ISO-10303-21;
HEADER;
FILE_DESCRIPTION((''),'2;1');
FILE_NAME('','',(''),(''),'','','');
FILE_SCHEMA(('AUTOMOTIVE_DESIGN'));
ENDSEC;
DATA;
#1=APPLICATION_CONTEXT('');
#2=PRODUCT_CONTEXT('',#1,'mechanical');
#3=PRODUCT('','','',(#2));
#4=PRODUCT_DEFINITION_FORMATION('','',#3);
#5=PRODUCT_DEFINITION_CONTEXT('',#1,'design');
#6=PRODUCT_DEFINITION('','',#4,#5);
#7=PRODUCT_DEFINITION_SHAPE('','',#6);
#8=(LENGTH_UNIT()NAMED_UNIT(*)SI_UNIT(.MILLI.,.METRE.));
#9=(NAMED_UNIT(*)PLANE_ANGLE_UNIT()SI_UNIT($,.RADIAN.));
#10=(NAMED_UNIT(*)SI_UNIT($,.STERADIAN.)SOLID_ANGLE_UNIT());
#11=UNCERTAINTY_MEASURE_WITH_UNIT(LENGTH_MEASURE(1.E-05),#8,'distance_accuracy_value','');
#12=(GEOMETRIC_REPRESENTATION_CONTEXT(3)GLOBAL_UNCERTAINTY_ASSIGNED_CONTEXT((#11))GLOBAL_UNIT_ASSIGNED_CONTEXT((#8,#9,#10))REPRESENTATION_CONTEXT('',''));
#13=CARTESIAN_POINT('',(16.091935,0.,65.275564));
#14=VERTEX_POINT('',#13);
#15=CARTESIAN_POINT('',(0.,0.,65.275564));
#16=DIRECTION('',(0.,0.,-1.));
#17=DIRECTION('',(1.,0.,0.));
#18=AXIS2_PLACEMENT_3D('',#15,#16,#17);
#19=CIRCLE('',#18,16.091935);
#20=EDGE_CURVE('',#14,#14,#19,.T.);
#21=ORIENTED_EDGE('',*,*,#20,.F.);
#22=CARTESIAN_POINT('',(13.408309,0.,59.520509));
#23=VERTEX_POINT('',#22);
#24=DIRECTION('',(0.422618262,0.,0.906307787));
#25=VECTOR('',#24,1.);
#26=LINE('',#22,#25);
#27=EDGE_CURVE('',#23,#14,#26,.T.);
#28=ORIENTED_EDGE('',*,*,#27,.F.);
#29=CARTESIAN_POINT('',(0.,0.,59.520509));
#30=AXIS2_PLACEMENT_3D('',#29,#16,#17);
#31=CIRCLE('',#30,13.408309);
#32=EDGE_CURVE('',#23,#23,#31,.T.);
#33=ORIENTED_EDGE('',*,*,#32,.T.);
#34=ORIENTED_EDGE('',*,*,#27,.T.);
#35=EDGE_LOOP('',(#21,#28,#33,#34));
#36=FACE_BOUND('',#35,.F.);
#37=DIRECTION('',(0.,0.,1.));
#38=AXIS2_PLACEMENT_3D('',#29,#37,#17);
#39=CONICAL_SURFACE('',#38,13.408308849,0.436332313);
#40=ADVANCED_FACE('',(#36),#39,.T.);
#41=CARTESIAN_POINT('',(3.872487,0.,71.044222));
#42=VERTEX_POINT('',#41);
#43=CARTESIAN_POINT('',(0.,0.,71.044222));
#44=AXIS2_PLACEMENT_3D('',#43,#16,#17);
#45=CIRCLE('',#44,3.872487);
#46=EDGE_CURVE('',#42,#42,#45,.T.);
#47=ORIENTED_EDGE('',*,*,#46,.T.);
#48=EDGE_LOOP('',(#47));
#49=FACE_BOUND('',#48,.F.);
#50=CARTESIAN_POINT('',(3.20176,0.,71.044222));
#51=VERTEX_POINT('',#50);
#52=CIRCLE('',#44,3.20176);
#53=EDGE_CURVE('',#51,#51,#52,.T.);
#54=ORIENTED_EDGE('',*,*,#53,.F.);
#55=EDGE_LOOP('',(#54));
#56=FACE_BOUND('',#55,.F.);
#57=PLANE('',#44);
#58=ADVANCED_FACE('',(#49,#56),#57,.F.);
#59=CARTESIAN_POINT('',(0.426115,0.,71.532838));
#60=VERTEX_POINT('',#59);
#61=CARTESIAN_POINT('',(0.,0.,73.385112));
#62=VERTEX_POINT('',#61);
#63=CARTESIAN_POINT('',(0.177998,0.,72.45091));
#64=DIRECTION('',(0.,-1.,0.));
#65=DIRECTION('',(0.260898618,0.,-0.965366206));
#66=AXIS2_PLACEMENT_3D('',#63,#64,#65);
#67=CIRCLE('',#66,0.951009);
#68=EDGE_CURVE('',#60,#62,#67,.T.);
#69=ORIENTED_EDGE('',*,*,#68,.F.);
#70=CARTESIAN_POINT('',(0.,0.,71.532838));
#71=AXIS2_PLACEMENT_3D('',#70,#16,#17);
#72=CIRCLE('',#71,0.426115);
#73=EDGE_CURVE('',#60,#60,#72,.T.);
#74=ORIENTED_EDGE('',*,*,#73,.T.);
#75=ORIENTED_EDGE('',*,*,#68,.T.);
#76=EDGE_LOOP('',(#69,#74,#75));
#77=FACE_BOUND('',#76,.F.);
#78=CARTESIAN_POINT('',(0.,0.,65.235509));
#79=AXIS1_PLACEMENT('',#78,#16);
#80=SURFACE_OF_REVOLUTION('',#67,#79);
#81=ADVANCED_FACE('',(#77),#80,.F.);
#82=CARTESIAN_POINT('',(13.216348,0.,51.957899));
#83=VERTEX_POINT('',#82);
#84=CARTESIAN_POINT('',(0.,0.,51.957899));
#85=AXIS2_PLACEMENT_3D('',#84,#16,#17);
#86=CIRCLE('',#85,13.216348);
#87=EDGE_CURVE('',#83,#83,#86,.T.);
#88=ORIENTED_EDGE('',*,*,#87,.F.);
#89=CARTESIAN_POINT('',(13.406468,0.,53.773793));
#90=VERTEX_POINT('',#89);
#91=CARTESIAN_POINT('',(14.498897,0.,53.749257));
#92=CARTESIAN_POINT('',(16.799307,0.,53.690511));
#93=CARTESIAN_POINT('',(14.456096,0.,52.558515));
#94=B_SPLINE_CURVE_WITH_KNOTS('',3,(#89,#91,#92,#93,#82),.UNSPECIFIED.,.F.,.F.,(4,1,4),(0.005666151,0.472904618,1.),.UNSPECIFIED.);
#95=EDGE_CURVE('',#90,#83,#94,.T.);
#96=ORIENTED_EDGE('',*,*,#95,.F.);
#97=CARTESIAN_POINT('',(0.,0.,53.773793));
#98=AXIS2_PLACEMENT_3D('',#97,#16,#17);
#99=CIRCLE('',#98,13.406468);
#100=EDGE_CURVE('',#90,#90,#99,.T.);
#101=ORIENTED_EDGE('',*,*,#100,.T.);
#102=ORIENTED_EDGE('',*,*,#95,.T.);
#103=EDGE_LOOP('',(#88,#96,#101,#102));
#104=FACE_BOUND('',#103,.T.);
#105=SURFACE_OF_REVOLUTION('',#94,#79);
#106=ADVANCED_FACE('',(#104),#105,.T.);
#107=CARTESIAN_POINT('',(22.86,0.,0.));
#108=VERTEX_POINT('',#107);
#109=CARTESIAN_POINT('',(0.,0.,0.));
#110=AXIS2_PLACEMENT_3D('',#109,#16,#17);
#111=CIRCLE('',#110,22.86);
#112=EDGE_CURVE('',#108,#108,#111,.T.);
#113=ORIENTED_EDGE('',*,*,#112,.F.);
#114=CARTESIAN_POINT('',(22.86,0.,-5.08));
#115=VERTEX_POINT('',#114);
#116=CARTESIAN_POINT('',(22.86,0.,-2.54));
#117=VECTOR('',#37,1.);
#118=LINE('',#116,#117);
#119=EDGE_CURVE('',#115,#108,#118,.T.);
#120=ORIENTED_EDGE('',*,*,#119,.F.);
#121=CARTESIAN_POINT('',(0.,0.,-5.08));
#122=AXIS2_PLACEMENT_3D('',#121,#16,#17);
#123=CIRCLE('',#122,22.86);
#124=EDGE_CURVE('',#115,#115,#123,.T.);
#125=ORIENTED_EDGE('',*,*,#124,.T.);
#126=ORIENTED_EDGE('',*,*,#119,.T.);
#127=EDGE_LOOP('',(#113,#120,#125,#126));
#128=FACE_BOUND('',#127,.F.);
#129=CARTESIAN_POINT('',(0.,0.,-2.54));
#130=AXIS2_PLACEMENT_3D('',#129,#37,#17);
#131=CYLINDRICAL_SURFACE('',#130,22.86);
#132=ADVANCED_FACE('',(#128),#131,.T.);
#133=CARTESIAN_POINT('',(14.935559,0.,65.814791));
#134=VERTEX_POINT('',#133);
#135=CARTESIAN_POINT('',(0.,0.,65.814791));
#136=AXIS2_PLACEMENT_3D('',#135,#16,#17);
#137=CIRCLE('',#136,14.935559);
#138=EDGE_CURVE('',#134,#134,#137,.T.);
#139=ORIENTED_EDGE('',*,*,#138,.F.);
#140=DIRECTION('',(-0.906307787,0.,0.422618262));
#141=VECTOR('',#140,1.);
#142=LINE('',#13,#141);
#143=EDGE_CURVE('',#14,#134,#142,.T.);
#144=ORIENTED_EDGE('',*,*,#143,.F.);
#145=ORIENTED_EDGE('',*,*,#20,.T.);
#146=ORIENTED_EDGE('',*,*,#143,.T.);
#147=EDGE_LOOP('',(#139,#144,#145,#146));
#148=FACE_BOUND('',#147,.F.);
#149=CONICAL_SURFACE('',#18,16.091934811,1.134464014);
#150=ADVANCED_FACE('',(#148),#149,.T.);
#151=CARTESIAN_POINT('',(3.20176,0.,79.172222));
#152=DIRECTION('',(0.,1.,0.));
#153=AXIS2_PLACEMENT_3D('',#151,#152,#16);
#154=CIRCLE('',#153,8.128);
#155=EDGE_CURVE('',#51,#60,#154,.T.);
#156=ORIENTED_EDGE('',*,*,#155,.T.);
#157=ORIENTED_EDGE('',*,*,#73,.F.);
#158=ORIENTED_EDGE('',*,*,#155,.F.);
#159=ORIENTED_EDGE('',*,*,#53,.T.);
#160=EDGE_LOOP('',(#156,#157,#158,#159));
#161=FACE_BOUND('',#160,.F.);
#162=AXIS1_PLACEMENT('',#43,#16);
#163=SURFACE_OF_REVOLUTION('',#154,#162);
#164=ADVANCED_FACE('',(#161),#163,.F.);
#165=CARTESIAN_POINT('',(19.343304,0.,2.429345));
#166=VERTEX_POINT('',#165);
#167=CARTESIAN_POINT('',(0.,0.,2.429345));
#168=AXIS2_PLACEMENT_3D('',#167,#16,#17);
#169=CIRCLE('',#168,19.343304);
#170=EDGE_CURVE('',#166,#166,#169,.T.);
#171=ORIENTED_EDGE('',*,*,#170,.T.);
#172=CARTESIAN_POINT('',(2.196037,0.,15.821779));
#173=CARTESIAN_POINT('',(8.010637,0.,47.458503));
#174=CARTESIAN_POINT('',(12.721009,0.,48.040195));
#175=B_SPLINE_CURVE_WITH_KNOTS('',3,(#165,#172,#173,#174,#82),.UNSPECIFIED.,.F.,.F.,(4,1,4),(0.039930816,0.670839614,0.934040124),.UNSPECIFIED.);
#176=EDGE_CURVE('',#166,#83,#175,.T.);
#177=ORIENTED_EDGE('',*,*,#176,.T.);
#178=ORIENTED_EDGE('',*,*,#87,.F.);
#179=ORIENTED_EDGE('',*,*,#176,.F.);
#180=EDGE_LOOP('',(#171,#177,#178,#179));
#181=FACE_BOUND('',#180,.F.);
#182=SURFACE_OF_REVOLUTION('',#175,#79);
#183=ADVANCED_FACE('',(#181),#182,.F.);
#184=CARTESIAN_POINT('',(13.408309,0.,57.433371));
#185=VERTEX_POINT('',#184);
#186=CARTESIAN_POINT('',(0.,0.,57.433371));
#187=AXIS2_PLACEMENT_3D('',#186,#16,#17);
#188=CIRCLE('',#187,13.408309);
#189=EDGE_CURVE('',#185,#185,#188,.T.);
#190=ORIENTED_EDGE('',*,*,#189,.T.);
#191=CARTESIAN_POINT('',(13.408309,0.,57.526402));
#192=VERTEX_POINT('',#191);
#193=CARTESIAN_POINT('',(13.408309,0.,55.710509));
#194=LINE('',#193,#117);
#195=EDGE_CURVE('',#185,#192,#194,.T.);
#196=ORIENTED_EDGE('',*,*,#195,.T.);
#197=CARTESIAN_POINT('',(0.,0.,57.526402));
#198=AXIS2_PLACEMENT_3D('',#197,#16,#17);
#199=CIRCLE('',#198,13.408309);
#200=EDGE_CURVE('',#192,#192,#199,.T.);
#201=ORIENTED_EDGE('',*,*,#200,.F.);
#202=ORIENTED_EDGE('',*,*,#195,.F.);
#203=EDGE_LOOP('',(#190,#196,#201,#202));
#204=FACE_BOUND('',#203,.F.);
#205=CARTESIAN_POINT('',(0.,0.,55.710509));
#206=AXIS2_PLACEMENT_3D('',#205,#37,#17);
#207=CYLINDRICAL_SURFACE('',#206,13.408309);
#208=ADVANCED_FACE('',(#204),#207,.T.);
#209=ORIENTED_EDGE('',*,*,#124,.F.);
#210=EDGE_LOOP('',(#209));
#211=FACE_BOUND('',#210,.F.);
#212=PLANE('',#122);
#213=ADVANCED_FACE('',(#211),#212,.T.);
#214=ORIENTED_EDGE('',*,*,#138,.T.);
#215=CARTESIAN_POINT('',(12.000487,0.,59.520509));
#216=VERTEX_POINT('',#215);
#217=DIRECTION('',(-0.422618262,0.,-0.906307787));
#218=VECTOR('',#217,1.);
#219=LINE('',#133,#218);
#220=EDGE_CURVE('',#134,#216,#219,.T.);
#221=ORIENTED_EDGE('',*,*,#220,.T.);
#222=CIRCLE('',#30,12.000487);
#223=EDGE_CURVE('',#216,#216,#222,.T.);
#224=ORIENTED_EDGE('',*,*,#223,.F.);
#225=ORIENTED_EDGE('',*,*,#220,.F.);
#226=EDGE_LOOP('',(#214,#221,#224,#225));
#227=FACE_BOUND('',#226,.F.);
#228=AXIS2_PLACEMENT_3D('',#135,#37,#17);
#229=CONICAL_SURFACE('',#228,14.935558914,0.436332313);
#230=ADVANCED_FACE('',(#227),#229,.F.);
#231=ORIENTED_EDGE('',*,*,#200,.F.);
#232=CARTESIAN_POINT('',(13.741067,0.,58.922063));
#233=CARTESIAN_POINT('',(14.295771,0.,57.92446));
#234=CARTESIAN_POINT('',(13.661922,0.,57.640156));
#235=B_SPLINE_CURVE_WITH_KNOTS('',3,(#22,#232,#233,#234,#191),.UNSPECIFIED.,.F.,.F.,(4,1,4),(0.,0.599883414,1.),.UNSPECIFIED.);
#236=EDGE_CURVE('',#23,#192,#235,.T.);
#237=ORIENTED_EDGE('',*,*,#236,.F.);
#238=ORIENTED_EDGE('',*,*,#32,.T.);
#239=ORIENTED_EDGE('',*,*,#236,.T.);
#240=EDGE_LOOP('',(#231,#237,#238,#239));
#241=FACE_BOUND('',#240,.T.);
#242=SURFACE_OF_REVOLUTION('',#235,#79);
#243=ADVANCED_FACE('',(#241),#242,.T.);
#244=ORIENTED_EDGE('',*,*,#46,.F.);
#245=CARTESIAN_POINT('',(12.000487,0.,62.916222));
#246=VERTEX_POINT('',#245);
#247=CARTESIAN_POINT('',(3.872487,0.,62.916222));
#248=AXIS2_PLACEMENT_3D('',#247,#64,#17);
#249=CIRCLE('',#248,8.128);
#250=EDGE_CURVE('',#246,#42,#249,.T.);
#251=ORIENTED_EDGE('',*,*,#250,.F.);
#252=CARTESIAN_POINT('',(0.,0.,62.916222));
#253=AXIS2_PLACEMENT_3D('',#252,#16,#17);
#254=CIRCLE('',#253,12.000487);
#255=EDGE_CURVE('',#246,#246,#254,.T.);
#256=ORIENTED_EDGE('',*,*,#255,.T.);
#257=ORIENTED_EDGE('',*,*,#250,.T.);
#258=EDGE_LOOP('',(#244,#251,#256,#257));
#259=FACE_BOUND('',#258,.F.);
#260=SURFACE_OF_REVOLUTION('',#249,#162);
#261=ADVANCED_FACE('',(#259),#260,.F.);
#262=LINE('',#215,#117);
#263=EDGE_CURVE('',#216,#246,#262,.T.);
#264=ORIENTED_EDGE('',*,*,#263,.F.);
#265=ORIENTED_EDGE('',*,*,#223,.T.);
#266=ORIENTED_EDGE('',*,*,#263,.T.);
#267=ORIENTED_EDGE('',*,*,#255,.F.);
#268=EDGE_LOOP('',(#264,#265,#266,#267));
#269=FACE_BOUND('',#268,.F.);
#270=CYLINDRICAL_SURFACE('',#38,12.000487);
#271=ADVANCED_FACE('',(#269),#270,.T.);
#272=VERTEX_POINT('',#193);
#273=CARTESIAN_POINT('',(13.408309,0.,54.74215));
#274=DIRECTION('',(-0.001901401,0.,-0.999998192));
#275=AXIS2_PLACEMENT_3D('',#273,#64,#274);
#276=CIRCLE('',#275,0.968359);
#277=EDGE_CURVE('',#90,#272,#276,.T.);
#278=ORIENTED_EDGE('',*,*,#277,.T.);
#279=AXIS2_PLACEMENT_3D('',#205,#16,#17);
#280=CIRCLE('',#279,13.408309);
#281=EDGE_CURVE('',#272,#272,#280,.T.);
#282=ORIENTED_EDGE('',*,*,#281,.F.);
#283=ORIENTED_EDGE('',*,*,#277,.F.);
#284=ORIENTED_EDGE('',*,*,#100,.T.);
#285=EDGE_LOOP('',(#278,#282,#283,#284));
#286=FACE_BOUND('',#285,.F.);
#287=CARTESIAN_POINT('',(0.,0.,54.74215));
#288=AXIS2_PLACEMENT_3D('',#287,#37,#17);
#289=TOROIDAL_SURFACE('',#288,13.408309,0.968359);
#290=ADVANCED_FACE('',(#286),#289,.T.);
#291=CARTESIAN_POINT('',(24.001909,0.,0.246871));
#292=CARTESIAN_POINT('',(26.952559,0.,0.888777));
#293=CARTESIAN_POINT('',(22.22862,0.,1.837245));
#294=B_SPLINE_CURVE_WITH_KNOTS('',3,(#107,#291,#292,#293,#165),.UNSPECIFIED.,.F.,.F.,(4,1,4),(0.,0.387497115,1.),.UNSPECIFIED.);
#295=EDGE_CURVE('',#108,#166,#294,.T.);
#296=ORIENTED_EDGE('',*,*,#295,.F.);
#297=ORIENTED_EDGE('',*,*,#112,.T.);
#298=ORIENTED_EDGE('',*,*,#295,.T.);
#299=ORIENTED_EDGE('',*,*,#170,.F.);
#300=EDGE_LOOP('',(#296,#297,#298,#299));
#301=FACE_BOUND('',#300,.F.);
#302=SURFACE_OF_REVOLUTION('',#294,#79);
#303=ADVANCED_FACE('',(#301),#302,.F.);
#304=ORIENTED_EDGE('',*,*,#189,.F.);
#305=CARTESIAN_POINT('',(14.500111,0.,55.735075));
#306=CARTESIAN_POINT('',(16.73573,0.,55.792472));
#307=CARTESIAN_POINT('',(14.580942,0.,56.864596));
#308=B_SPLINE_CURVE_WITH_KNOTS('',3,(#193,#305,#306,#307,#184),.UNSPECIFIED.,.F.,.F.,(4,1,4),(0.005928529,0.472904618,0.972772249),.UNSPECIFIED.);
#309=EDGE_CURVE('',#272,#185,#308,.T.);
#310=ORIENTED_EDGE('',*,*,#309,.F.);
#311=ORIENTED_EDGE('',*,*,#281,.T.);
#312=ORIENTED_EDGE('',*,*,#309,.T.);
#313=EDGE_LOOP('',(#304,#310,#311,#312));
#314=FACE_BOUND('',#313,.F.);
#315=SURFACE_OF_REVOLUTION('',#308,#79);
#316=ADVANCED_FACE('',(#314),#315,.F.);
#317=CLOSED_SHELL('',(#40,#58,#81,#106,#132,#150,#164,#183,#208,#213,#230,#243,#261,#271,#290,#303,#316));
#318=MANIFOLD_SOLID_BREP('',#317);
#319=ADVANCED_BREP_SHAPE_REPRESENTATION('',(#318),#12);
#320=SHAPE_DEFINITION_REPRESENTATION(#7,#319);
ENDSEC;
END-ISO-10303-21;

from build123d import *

# Parameters (mm, degrees)
F0_W = 22.86
F0_H = 5.08


# Not quite as in the source:
# - a fillet or chamfer that OpenCascade refuses, or shapes differently, is made with other operations: its cross-section is extruded or revolved along the edge and cut away or added
# - ends of sketch curves that miss each other by under 0.0002 mm in the source are joined


with BuildPart() as f1:
    # F0 (on Front) → F1 (revolve)
    with BuildSketch(Plane.XZ):
        with BuildLine():
            Line((0, 55.7105094194), (0, 0))
            Line((0, 0), (22.86, 0))
            add(Edge.make_bspline(
                [(22.86, 0), (21.5989604618, 0.7698820082), (20.4285707435, 1.5817251932), (19.3433039435, 2.4293450133)],
                knots=[0, 0, 0, 0, 0.0399308158, 0.0399308158, 0.0399308158, 0.0399308158], degree=3))
            add(Edge.make_bspline(
                [(19.3433039435, 2.4293450133), (2.1960366332, 15.8217786838), (8.0106373207, 47.4585030975), (12.7210086452, 48.040195095), (13.216347906, 51.9578989549)],
                knots=[0.0399308158, 0.0399308158, 0.0399308158, 0.0399308158, 0.6708396138, 0.9340401236, 0.9340401236, 0.9340401236, 0.9340401236], degree=3))
            add(Edge.make_bspline(
                [(13.216347906, 51.9578989549), (13.2835273481, 52.4892300656), (13.3343132727, 53.0894723366), (13.3667210402, 53.7746848436)],
                knots=[0.9340401236, 0.9340401236, 0.9340401236, 0.9340401236, 0.9697361905, 0.9697361905, 0.9697361905, 0.9697361905], degree=3))
            add(Edge.make_bspline(
                [(13.3667210402, 53.7746848436), (13.3941969664, 54.3556211357), (13.4084627224, 54.9976338064), (13.4083088487, 55.7105094194)],
                knots=[0.9697361905, 0.9697361905, 0.9697361905, 0.9697361905, 1, 1, 1, 1], degree=3))
            Line((13.4083088487, 55.7105094194), (0, 55.7105094194))
        make_face()
        with Locations((11.43, -2.54)):
            Rectangle(F0_W, F0_H)
        with BuildLine():
            add(Edge.make_bspline(
                [(22.86, 0), (21.5989604618, 0.7698820082), (20.4285707435, 1.5817251932), (19.3433039435, 2.4293450133)],
                knots=[0, 0, 0, 0, 0.0399308158, 0.0399308158, 0.0399308158, 0.0399308158], degree=3))
            add(Edge.make_bspline(
                [(22.86, 0), (24.0019086341, 0.246870981), (26.952558916, 0.8887774552), (22.2286200965, 1.8372453111), (19.3433039435, 2.4293450133)],
                knots=[0, 0, 0, 0, 0.3874971146, 1, 1, 1, 1], degree=3))
        make_face()
        Polygon((0, 59.5205094194), (0, 55.7105094194), (13.4083088487, 55.7105094194), (13.4083088487, 57.4333710852), (13.4083088487, 57.5264018668), (13.4083088487, 59.5205094194), (12.0004873024, 59.5205094194), align=None)
        Polygon((0, 71.0442215204), (0, 59.5205094194), (12.0004873024, 59.5205094194), (12.0004873024, 71.0442215204), (0.4261149152, 71.0442215204), align=None)
        with BuildLine():
            ThreePointArc((13.4064676104, 53.7737931527), (14.3766674197, 54.7412297913), (13.4083088487, 55.7105094194))
            add(Edge.make_bspline(
                [(13.3667210402, 53.7746848436), (13.3941969664, 54.3556211357), (13.4084627224, 54.9976338064), (13.4083088487, 55.7105094194)],
                knots=[0.9697361905, 0.9697361905, 0.9697361905, 0.9697361905, 1, 1, 1, 1], degree=3))
            add(Edge.make_bspline(
                [(13.3667210402, 53.7746848436), (13.3799703774, 53.7743877866), (13.3932198369, 53.7740906953), (13.4064676104, 53.7737931527)],
                knots=[0, 0, 0, 0, 0.0056661513, 0.0056661513, 0.0056661513, 0.0056661513], degree=3))
        make_face()
        with BuildLine():
            Line((13.4083088487, 57.4333710852), (13.4083088487, 55.7105094194))
            add(Edge.make_bspline(
                [(13.4083088487, 55.7105094194), (14.5001105526, 55.7350745123), (16.735730214, 55.7924721705), (14.5809416935, 56.8645959096), (13.4083088487, 57.4333710852)],
                knots=[0.005928529, 0.005928529, 0.005928529, 0.005928529, 0.4729046175, 0.9727722486, 0.9727722486, 0.9727722486, 0.9727722486], degree=3))
        make_face()
        with BuildLine():
            add(Edge.make_bspline(
                [(13.216347906, 51.9578989549), (13.2835273481, 52.4892300656), (13.3343132727, 53.0894723366), (13.3667210402, 53.7746848436)],
                knots=[0.9340401236, 0.9340401236, 0.9340401236, 0.9340401236, 0.9697361905, 0.9697361905, 0.9697361905, 0.9697361905], degree=3))
            add(Edge.make_bspline(
                [(13.4064676104, 53.7737931527), (14.4988968447, 53.7492573873), (16.7993068851, 53.690510951), (14.4560957231, 52.5585149788), (13.216347906, 51.9578989549)],
                knots=[0.0056661513, 0.0056661513, 0.0056661513, 0.0056661513, 0.4729046175, 1, 1, 1, 1], degree=3))
            ThreePointArc((13.4064676104, 53.7737931527), (13.3865897487, 53.7740349992), (13.3667210402, 53.7746848436))
        make_face()
        with BuildLine():
            Line((0, 73.3851119876), (0, 71.0442215204))
            Line((0, 71.0442215204), (0.4261149152, 71.0442215204))
            Line((0.4261149152, 71.0442215204), (0.4261149152, 71.5328380466))
            ThreePointArc((0.4261149152, 71.5328380466), (1.1047984107, 72.6641196839), (0, 73.3851119876))
        make_face()
        Polygon((14.9355589143, 65.8147908034), (12.0004873024, 59.5205094194), (13.4083088487, 59.5205094194), (16.0919348108, 65.2755638671), align=None)
        with BuildLine():
            add(Edge.make_bspline(
                [(13.3667210402, 53.7746848436), (13.3799703774, 53.7743877866), (13.3932198369, 53.7740906953), (13.4064676104, 53.7737931527)],
                knots=[0, 0, 0, 0, 0.0056661513, 0.0056661513, 0.0056661513, 0.0056661513], degree=3))
            ThreePointArc((13.3667210402, 53.7746848436), (13.3865897487, 53.7740349992), (13.4064676104, 53.7737931527))
        make_face()
        with BuildLine():
            add(Edge.make_bspline(
                [(13.4083088487, 59.5205094194), (13.7410667142, 58.9220634461), (14.2957709416, 57.9244596453), (13.6619222311, 57.6401563363), (13.4083088487, 57.5264018668)],
                knots=[0, 0, 0, 0, 0.5998834136, 1, 1, 1, 1], degree=3))
            Line((13.4083088487, 59.5205094194), (13.4083088487, 57.5264018668))
        make_face()
    revolve(axis=Axis((0, 0, 65.2355094194), (0, 0, -1)))

    # F2: fillet of radius 8.128 on 2 edges, made by hand

    # F2_s1 → F2_t2 (revolve)
    with BuildSketch(Plane.XZ):
        with BuildLine():
            ThreePointArc((3.2017597302, 71.0442215204), (1.7925977231, 71.1673076272), (0.4261149152, 71.5328380466))
            Line((0.4261149152, 71.5328380466), (0.4261149152, 71.0442215204))
            Line((0.4261149152, 71.0442215204), (3.2017597302, 71.0442215204))
        make_face()
    revolve(axis=Axis((0, 0, 71.0442215204), (0, 0, -1)))

    # F2_s3 → F2_t4 (revolve, cut)
    with BuildSketch(Plane.XZ):
        with BuildLine():
            ThreePointArc((12.0004873024, 62.9162215204), (9.6198512199, 68.6635854379), (3.8724873024, 71.0442215204))
            Line((3.8724873024, 71.0442215204), (12.0004873024, 71.0442215204))
            Line((12.0004873024, 71.0442215204), (12.0004873024, 62.9162215204))
        make_face()
    revolve(axis=Axis((0, 0, 71.0442215204), (0, 0, -1)), mode=Mode.SUBTRACT)


solid = f1.part
